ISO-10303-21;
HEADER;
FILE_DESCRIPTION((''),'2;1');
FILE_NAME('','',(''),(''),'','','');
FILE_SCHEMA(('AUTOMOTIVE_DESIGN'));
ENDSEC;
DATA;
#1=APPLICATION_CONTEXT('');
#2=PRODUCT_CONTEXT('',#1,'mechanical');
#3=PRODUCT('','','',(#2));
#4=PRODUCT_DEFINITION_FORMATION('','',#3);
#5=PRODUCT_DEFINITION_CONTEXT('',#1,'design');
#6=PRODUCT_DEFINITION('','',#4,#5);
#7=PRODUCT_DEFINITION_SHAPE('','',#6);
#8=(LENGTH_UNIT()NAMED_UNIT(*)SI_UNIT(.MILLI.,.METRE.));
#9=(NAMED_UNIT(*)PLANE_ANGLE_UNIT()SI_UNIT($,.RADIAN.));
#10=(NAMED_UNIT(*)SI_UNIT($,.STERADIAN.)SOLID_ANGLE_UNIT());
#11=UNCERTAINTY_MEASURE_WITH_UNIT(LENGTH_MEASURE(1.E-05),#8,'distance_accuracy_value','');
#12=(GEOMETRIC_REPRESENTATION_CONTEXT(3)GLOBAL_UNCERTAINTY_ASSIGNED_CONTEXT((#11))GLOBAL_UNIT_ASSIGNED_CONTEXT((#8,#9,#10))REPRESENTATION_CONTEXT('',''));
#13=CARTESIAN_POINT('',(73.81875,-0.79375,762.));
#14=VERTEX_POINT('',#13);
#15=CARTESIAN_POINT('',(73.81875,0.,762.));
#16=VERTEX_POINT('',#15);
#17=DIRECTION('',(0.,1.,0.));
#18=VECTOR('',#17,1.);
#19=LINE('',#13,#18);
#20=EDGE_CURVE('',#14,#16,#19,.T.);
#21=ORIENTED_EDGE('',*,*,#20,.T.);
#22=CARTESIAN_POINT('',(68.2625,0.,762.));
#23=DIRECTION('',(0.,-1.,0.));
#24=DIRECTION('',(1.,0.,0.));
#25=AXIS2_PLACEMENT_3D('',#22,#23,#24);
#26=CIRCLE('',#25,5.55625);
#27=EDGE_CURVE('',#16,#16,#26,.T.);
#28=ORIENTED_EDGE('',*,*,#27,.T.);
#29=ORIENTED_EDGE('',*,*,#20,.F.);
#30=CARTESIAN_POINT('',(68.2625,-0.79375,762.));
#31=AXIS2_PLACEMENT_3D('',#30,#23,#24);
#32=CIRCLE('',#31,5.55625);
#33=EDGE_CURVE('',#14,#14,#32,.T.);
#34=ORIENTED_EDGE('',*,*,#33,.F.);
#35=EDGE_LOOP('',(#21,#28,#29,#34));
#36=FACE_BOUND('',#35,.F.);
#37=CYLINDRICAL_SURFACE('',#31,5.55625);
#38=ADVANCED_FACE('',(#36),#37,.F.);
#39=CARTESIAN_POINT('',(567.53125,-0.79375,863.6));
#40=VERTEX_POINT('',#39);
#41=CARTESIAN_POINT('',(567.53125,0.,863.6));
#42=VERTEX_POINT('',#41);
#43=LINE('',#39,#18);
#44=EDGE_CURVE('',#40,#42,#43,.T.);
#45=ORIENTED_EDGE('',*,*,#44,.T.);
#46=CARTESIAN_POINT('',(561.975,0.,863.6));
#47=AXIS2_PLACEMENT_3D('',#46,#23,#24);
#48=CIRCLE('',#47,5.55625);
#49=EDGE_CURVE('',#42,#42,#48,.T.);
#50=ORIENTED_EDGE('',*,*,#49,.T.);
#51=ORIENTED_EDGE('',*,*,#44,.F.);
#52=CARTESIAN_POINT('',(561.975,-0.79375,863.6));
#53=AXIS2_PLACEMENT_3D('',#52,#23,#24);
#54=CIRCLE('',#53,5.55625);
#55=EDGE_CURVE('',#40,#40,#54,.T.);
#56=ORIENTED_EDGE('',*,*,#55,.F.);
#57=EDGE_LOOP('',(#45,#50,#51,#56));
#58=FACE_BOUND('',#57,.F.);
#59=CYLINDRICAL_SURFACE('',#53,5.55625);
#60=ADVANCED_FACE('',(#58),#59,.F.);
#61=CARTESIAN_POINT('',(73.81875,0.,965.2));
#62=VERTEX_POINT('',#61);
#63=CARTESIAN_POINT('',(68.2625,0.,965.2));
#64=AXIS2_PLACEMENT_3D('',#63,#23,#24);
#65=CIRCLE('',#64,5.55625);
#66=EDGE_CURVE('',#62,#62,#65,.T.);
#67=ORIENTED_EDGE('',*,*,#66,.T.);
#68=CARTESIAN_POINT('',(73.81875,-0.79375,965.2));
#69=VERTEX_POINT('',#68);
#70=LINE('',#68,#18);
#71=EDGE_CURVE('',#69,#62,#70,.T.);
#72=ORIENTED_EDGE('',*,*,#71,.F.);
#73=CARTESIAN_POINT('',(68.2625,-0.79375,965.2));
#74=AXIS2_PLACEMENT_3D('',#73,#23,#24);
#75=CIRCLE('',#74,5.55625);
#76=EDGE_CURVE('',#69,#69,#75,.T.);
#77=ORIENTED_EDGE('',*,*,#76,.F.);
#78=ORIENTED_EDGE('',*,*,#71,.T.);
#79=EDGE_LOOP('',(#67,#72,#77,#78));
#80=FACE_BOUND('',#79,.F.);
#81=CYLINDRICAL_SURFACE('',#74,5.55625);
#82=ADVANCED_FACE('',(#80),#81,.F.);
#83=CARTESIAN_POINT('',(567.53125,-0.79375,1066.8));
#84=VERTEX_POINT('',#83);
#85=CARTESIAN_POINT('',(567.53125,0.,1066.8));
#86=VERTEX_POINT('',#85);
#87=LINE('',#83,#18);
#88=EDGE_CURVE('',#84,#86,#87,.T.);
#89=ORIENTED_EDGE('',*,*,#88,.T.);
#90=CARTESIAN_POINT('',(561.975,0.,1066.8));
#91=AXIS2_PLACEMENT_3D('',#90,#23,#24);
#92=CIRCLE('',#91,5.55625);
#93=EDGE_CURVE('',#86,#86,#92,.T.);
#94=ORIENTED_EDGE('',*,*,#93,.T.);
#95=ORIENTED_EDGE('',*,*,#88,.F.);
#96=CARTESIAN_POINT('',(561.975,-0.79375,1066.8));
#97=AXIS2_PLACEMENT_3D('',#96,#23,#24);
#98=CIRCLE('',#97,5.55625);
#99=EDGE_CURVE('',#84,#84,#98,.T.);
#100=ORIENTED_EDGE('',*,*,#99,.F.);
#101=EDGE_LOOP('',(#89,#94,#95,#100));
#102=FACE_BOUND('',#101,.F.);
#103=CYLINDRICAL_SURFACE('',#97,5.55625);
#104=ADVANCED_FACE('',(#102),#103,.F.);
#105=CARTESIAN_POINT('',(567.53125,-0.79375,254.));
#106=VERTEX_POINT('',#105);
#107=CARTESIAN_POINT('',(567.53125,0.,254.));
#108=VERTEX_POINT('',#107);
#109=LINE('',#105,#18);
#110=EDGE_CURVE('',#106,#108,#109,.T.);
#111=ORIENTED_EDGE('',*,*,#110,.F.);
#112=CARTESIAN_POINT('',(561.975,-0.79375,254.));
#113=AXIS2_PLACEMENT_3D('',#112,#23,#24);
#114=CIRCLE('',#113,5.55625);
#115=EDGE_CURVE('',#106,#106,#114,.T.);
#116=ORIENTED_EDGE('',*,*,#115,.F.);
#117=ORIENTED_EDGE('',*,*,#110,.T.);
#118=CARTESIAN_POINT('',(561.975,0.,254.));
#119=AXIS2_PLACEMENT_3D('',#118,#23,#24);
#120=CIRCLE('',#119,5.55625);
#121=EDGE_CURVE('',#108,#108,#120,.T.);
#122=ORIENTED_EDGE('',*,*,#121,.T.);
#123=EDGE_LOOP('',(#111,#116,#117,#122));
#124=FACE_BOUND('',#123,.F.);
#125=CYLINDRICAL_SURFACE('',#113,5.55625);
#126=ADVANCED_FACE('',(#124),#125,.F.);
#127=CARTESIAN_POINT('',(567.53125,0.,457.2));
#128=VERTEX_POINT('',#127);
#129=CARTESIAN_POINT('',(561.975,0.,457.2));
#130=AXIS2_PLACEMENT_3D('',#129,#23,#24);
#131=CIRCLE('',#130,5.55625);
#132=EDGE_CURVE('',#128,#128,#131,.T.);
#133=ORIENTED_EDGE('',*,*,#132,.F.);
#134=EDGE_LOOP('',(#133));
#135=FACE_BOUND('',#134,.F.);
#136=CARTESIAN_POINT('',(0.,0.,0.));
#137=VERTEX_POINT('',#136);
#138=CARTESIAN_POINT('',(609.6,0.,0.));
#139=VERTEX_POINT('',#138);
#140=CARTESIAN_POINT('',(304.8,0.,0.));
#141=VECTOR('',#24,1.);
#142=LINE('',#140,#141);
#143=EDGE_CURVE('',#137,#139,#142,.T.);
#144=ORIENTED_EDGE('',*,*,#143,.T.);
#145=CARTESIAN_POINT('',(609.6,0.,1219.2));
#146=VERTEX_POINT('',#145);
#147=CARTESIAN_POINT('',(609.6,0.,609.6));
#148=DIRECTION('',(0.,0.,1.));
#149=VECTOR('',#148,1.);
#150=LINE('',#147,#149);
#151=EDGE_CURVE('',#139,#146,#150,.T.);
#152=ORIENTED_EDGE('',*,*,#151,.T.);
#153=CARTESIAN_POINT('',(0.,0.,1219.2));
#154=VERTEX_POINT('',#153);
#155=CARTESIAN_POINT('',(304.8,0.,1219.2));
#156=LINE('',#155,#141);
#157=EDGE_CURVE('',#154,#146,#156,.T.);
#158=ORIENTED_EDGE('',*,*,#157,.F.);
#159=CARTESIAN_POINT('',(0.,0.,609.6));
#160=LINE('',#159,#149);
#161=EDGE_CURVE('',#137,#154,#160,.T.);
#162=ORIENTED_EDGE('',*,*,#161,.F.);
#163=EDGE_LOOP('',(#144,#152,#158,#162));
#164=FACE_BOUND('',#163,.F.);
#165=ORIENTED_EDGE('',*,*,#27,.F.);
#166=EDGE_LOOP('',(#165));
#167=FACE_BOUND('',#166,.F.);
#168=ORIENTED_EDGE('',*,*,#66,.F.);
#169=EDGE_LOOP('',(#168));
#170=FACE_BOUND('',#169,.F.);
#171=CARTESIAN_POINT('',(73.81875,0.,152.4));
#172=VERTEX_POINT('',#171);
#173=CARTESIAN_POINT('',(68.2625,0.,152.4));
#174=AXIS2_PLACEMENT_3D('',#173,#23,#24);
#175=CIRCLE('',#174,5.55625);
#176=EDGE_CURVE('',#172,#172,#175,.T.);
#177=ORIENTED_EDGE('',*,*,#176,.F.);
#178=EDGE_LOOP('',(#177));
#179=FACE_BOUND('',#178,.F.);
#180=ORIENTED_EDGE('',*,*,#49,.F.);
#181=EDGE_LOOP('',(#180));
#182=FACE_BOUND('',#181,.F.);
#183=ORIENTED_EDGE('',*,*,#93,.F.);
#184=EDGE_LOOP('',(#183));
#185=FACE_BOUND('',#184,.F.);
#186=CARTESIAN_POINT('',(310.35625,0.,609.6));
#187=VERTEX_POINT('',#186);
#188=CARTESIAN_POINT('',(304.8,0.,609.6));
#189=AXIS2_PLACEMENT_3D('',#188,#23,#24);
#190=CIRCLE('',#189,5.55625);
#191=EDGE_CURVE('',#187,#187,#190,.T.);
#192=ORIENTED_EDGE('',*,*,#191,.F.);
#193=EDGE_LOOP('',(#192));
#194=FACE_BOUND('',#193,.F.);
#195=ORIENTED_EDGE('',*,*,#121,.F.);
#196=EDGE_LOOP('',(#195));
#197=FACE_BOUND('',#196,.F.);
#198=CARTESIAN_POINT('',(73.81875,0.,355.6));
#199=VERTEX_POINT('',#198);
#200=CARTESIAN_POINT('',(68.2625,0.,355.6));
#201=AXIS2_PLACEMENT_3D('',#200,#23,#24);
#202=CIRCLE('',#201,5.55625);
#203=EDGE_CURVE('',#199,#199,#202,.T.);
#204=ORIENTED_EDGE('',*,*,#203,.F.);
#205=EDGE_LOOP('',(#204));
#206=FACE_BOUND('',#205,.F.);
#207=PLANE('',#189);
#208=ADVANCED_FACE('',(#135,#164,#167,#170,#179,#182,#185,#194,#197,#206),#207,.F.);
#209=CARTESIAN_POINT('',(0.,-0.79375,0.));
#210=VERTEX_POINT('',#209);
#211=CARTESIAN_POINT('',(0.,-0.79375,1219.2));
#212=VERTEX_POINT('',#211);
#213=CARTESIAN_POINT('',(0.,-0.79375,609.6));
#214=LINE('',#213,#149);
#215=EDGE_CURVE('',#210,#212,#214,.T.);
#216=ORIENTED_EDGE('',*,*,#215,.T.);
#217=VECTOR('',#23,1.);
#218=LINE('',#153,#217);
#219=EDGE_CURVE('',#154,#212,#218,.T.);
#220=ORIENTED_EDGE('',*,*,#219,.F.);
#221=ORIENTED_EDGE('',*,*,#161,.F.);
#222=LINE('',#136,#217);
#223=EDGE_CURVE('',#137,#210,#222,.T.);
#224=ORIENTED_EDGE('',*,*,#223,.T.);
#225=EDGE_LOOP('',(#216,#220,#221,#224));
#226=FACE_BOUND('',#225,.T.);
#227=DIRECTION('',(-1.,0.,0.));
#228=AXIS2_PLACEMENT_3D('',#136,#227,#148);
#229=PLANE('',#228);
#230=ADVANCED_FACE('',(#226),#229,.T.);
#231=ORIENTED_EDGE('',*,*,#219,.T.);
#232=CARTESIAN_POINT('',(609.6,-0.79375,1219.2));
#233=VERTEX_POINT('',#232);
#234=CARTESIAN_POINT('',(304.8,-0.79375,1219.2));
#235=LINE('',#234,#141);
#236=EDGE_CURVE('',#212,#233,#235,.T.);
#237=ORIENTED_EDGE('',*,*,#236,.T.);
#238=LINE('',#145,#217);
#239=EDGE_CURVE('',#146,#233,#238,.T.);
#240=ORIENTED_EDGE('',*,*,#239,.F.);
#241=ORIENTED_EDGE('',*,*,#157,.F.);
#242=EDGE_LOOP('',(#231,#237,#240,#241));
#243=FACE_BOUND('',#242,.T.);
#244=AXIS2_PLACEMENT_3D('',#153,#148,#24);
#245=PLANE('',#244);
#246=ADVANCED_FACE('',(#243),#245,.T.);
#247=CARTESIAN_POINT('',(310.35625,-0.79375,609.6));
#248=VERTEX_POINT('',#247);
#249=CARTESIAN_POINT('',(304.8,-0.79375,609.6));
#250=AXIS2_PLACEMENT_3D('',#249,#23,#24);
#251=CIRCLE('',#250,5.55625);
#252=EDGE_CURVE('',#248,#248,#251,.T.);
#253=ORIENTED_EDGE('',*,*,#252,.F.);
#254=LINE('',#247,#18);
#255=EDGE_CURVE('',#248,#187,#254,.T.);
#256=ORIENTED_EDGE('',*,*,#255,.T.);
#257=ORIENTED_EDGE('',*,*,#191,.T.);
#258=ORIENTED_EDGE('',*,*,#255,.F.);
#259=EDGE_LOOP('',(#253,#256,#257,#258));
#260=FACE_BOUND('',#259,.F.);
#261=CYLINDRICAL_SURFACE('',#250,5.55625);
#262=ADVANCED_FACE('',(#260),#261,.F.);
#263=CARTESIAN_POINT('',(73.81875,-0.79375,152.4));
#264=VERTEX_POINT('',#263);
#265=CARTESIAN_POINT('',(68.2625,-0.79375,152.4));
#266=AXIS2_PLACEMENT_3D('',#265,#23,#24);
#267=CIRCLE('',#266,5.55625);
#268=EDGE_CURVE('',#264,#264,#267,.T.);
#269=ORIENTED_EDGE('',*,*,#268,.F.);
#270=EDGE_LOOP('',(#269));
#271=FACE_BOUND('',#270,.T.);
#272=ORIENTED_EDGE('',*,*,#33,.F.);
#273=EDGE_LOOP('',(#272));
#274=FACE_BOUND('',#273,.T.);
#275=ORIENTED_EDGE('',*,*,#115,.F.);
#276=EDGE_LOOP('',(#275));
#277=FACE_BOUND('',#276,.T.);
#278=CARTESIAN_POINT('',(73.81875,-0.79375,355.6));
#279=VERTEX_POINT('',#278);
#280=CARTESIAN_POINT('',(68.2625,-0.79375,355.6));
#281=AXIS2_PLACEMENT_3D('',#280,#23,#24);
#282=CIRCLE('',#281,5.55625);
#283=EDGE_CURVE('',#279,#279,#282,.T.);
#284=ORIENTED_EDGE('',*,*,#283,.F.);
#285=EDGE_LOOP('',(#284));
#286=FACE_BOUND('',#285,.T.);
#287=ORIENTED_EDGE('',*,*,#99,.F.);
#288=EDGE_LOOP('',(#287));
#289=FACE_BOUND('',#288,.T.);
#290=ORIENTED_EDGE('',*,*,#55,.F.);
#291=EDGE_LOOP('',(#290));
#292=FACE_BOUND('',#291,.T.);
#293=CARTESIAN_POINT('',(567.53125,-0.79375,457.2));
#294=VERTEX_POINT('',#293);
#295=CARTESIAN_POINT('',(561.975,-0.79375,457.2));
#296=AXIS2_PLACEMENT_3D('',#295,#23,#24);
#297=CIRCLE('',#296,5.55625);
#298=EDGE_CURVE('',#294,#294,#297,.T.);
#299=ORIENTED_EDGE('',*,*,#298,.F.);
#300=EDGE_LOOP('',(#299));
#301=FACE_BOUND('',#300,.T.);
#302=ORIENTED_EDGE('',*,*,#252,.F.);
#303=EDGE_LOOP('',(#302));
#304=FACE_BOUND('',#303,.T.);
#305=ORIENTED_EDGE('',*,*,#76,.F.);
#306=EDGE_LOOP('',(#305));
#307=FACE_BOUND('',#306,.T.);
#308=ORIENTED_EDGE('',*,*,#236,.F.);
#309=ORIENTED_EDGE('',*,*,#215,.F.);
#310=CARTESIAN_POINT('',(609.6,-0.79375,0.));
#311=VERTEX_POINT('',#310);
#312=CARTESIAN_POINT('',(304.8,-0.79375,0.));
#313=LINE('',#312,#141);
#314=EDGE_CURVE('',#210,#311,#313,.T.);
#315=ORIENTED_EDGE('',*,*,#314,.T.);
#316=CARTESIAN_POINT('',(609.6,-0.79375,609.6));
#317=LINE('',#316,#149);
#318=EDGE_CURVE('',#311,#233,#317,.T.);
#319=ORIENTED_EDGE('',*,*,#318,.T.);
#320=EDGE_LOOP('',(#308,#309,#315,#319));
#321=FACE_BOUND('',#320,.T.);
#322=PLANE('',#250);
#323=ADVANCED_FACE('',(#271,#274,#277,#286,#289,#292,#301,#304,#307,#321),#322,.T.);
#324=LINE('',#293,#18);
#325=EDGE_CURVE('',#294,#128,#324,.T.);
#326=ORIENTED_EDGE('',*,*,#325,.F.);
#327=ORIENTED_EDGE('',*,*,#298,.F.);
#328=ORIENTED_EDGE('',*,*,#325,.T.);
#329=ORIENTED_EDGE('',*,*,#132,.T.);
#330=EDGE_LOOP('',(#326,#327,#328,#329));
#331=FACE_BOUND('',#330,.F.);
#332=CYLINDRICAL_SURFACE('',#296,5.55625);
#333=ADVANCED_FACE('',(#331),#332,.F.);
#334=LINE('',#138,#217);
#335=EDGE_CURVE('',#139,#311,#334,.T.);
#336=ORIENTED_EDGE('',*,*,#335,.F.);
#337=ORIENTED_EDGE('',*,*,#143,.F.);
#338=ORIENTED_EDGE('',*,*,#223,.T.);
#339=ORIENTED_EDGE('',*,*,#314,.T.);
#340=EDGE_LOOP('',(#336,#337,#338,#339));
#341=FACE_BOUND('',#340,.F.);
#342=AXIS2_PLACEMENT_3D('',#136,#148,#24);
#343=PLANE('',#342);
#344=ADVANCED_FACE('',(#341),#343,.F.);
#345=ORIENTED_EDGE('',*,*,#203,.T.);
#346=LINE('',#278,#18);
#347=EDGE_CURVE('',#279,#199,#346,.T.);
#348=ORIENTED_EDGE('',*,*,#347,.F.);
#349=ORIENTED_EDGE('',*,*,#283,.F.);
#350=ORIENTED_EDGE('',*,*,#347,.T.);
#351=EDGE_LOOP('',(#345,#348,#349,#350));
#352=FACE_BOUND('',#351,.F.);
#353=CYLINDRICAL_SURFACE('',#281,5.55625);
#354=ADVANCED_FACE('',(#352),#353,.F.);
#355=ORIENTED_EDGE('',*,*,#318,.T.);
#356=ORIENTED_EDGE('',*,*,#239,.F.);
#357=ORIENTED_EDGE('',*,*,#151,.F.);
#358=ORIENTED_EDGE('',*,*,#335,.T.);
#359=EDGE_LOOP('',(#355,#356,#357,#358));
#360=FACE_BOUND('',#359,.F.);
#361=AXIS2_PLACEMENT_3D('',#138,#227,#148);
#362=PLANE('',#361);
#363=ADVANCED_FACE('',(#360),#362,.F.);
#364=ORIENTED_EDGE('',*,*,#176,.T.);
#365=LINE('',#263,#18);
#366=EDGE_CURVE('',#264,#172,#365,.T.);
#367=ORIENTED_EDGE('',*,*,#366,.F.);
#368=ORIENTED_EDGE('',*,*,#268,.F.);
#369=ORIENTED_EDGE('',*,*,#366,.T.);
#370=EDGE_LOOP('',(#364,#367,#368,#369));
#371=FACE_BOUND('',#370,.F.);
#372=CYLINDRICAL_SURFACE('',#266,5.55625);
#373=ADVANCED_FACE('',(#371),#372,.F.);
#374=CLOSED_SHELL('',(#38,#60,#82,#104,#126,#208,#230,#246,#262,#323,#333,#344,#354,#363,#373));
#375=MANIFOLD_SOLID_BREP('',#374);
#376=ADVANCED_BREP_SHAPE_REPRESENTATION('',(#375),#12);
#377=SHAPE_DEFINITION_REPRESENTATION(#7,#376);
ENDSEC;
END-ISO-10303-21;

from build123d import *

# Parameters (mm, degrees)
F0_W     = 609.6
F0_H     = 1219.2
F1_DEPTH = 0.79375
F2_R     = 5.55625
F3_DEPTH = 25.4
F4_R     = 5.55625
F5_DEPTH = 25.4


# Not quite as in the source:
# - a feature names something its author has since deleted; it is built from what else it names


with BuildPart() as f1:
    # F0 (on Front) → F1 (new body)
    with BuildSketch(Plane.XZ):
        with Locations((304.8, 609.6)):
            Rectangle(F0_W, F0_H)
    extrude(amount=F1_DEPTH)

    # F2 (on face) → F3 (cut)
    with BuildSketch(Plane.XZ.offset(0.79375)):
        with Locations((68.2625, 152.4)):
            Circle(F2_R)
        with Locations((68.2625, 355.6)):
            Circle(F2_R)
        with Locations((561.975, 863.6)):
            Circle(F2_R)
        with Locations((561.975, 1066.8)):
            Circle(F2_R)
        with Locations((561.975, 254)):
            Circle(F2_R)
        with Locations((561.975, 457.2)):
            Circle(F2_R)
        with Locations((68.2625, 762)):
            Circle(F2_R)
        with Locations((68.2625, 965.2)):
            Circle(F2_R)
    extrude(amount=-F3_DEPTH, mode=Mode.SUBTRACT)

    # F4 (on face) → F5 (cut)
    with BuildSketch(Plane.XZ.offset(0.79375)):
        with Locations((304.8, 609.6)):
            Circle(F4_R)
    extrude(amount=-F5_DEPTH, mode=Mode.SUBTRACT)


solid = f1.part
